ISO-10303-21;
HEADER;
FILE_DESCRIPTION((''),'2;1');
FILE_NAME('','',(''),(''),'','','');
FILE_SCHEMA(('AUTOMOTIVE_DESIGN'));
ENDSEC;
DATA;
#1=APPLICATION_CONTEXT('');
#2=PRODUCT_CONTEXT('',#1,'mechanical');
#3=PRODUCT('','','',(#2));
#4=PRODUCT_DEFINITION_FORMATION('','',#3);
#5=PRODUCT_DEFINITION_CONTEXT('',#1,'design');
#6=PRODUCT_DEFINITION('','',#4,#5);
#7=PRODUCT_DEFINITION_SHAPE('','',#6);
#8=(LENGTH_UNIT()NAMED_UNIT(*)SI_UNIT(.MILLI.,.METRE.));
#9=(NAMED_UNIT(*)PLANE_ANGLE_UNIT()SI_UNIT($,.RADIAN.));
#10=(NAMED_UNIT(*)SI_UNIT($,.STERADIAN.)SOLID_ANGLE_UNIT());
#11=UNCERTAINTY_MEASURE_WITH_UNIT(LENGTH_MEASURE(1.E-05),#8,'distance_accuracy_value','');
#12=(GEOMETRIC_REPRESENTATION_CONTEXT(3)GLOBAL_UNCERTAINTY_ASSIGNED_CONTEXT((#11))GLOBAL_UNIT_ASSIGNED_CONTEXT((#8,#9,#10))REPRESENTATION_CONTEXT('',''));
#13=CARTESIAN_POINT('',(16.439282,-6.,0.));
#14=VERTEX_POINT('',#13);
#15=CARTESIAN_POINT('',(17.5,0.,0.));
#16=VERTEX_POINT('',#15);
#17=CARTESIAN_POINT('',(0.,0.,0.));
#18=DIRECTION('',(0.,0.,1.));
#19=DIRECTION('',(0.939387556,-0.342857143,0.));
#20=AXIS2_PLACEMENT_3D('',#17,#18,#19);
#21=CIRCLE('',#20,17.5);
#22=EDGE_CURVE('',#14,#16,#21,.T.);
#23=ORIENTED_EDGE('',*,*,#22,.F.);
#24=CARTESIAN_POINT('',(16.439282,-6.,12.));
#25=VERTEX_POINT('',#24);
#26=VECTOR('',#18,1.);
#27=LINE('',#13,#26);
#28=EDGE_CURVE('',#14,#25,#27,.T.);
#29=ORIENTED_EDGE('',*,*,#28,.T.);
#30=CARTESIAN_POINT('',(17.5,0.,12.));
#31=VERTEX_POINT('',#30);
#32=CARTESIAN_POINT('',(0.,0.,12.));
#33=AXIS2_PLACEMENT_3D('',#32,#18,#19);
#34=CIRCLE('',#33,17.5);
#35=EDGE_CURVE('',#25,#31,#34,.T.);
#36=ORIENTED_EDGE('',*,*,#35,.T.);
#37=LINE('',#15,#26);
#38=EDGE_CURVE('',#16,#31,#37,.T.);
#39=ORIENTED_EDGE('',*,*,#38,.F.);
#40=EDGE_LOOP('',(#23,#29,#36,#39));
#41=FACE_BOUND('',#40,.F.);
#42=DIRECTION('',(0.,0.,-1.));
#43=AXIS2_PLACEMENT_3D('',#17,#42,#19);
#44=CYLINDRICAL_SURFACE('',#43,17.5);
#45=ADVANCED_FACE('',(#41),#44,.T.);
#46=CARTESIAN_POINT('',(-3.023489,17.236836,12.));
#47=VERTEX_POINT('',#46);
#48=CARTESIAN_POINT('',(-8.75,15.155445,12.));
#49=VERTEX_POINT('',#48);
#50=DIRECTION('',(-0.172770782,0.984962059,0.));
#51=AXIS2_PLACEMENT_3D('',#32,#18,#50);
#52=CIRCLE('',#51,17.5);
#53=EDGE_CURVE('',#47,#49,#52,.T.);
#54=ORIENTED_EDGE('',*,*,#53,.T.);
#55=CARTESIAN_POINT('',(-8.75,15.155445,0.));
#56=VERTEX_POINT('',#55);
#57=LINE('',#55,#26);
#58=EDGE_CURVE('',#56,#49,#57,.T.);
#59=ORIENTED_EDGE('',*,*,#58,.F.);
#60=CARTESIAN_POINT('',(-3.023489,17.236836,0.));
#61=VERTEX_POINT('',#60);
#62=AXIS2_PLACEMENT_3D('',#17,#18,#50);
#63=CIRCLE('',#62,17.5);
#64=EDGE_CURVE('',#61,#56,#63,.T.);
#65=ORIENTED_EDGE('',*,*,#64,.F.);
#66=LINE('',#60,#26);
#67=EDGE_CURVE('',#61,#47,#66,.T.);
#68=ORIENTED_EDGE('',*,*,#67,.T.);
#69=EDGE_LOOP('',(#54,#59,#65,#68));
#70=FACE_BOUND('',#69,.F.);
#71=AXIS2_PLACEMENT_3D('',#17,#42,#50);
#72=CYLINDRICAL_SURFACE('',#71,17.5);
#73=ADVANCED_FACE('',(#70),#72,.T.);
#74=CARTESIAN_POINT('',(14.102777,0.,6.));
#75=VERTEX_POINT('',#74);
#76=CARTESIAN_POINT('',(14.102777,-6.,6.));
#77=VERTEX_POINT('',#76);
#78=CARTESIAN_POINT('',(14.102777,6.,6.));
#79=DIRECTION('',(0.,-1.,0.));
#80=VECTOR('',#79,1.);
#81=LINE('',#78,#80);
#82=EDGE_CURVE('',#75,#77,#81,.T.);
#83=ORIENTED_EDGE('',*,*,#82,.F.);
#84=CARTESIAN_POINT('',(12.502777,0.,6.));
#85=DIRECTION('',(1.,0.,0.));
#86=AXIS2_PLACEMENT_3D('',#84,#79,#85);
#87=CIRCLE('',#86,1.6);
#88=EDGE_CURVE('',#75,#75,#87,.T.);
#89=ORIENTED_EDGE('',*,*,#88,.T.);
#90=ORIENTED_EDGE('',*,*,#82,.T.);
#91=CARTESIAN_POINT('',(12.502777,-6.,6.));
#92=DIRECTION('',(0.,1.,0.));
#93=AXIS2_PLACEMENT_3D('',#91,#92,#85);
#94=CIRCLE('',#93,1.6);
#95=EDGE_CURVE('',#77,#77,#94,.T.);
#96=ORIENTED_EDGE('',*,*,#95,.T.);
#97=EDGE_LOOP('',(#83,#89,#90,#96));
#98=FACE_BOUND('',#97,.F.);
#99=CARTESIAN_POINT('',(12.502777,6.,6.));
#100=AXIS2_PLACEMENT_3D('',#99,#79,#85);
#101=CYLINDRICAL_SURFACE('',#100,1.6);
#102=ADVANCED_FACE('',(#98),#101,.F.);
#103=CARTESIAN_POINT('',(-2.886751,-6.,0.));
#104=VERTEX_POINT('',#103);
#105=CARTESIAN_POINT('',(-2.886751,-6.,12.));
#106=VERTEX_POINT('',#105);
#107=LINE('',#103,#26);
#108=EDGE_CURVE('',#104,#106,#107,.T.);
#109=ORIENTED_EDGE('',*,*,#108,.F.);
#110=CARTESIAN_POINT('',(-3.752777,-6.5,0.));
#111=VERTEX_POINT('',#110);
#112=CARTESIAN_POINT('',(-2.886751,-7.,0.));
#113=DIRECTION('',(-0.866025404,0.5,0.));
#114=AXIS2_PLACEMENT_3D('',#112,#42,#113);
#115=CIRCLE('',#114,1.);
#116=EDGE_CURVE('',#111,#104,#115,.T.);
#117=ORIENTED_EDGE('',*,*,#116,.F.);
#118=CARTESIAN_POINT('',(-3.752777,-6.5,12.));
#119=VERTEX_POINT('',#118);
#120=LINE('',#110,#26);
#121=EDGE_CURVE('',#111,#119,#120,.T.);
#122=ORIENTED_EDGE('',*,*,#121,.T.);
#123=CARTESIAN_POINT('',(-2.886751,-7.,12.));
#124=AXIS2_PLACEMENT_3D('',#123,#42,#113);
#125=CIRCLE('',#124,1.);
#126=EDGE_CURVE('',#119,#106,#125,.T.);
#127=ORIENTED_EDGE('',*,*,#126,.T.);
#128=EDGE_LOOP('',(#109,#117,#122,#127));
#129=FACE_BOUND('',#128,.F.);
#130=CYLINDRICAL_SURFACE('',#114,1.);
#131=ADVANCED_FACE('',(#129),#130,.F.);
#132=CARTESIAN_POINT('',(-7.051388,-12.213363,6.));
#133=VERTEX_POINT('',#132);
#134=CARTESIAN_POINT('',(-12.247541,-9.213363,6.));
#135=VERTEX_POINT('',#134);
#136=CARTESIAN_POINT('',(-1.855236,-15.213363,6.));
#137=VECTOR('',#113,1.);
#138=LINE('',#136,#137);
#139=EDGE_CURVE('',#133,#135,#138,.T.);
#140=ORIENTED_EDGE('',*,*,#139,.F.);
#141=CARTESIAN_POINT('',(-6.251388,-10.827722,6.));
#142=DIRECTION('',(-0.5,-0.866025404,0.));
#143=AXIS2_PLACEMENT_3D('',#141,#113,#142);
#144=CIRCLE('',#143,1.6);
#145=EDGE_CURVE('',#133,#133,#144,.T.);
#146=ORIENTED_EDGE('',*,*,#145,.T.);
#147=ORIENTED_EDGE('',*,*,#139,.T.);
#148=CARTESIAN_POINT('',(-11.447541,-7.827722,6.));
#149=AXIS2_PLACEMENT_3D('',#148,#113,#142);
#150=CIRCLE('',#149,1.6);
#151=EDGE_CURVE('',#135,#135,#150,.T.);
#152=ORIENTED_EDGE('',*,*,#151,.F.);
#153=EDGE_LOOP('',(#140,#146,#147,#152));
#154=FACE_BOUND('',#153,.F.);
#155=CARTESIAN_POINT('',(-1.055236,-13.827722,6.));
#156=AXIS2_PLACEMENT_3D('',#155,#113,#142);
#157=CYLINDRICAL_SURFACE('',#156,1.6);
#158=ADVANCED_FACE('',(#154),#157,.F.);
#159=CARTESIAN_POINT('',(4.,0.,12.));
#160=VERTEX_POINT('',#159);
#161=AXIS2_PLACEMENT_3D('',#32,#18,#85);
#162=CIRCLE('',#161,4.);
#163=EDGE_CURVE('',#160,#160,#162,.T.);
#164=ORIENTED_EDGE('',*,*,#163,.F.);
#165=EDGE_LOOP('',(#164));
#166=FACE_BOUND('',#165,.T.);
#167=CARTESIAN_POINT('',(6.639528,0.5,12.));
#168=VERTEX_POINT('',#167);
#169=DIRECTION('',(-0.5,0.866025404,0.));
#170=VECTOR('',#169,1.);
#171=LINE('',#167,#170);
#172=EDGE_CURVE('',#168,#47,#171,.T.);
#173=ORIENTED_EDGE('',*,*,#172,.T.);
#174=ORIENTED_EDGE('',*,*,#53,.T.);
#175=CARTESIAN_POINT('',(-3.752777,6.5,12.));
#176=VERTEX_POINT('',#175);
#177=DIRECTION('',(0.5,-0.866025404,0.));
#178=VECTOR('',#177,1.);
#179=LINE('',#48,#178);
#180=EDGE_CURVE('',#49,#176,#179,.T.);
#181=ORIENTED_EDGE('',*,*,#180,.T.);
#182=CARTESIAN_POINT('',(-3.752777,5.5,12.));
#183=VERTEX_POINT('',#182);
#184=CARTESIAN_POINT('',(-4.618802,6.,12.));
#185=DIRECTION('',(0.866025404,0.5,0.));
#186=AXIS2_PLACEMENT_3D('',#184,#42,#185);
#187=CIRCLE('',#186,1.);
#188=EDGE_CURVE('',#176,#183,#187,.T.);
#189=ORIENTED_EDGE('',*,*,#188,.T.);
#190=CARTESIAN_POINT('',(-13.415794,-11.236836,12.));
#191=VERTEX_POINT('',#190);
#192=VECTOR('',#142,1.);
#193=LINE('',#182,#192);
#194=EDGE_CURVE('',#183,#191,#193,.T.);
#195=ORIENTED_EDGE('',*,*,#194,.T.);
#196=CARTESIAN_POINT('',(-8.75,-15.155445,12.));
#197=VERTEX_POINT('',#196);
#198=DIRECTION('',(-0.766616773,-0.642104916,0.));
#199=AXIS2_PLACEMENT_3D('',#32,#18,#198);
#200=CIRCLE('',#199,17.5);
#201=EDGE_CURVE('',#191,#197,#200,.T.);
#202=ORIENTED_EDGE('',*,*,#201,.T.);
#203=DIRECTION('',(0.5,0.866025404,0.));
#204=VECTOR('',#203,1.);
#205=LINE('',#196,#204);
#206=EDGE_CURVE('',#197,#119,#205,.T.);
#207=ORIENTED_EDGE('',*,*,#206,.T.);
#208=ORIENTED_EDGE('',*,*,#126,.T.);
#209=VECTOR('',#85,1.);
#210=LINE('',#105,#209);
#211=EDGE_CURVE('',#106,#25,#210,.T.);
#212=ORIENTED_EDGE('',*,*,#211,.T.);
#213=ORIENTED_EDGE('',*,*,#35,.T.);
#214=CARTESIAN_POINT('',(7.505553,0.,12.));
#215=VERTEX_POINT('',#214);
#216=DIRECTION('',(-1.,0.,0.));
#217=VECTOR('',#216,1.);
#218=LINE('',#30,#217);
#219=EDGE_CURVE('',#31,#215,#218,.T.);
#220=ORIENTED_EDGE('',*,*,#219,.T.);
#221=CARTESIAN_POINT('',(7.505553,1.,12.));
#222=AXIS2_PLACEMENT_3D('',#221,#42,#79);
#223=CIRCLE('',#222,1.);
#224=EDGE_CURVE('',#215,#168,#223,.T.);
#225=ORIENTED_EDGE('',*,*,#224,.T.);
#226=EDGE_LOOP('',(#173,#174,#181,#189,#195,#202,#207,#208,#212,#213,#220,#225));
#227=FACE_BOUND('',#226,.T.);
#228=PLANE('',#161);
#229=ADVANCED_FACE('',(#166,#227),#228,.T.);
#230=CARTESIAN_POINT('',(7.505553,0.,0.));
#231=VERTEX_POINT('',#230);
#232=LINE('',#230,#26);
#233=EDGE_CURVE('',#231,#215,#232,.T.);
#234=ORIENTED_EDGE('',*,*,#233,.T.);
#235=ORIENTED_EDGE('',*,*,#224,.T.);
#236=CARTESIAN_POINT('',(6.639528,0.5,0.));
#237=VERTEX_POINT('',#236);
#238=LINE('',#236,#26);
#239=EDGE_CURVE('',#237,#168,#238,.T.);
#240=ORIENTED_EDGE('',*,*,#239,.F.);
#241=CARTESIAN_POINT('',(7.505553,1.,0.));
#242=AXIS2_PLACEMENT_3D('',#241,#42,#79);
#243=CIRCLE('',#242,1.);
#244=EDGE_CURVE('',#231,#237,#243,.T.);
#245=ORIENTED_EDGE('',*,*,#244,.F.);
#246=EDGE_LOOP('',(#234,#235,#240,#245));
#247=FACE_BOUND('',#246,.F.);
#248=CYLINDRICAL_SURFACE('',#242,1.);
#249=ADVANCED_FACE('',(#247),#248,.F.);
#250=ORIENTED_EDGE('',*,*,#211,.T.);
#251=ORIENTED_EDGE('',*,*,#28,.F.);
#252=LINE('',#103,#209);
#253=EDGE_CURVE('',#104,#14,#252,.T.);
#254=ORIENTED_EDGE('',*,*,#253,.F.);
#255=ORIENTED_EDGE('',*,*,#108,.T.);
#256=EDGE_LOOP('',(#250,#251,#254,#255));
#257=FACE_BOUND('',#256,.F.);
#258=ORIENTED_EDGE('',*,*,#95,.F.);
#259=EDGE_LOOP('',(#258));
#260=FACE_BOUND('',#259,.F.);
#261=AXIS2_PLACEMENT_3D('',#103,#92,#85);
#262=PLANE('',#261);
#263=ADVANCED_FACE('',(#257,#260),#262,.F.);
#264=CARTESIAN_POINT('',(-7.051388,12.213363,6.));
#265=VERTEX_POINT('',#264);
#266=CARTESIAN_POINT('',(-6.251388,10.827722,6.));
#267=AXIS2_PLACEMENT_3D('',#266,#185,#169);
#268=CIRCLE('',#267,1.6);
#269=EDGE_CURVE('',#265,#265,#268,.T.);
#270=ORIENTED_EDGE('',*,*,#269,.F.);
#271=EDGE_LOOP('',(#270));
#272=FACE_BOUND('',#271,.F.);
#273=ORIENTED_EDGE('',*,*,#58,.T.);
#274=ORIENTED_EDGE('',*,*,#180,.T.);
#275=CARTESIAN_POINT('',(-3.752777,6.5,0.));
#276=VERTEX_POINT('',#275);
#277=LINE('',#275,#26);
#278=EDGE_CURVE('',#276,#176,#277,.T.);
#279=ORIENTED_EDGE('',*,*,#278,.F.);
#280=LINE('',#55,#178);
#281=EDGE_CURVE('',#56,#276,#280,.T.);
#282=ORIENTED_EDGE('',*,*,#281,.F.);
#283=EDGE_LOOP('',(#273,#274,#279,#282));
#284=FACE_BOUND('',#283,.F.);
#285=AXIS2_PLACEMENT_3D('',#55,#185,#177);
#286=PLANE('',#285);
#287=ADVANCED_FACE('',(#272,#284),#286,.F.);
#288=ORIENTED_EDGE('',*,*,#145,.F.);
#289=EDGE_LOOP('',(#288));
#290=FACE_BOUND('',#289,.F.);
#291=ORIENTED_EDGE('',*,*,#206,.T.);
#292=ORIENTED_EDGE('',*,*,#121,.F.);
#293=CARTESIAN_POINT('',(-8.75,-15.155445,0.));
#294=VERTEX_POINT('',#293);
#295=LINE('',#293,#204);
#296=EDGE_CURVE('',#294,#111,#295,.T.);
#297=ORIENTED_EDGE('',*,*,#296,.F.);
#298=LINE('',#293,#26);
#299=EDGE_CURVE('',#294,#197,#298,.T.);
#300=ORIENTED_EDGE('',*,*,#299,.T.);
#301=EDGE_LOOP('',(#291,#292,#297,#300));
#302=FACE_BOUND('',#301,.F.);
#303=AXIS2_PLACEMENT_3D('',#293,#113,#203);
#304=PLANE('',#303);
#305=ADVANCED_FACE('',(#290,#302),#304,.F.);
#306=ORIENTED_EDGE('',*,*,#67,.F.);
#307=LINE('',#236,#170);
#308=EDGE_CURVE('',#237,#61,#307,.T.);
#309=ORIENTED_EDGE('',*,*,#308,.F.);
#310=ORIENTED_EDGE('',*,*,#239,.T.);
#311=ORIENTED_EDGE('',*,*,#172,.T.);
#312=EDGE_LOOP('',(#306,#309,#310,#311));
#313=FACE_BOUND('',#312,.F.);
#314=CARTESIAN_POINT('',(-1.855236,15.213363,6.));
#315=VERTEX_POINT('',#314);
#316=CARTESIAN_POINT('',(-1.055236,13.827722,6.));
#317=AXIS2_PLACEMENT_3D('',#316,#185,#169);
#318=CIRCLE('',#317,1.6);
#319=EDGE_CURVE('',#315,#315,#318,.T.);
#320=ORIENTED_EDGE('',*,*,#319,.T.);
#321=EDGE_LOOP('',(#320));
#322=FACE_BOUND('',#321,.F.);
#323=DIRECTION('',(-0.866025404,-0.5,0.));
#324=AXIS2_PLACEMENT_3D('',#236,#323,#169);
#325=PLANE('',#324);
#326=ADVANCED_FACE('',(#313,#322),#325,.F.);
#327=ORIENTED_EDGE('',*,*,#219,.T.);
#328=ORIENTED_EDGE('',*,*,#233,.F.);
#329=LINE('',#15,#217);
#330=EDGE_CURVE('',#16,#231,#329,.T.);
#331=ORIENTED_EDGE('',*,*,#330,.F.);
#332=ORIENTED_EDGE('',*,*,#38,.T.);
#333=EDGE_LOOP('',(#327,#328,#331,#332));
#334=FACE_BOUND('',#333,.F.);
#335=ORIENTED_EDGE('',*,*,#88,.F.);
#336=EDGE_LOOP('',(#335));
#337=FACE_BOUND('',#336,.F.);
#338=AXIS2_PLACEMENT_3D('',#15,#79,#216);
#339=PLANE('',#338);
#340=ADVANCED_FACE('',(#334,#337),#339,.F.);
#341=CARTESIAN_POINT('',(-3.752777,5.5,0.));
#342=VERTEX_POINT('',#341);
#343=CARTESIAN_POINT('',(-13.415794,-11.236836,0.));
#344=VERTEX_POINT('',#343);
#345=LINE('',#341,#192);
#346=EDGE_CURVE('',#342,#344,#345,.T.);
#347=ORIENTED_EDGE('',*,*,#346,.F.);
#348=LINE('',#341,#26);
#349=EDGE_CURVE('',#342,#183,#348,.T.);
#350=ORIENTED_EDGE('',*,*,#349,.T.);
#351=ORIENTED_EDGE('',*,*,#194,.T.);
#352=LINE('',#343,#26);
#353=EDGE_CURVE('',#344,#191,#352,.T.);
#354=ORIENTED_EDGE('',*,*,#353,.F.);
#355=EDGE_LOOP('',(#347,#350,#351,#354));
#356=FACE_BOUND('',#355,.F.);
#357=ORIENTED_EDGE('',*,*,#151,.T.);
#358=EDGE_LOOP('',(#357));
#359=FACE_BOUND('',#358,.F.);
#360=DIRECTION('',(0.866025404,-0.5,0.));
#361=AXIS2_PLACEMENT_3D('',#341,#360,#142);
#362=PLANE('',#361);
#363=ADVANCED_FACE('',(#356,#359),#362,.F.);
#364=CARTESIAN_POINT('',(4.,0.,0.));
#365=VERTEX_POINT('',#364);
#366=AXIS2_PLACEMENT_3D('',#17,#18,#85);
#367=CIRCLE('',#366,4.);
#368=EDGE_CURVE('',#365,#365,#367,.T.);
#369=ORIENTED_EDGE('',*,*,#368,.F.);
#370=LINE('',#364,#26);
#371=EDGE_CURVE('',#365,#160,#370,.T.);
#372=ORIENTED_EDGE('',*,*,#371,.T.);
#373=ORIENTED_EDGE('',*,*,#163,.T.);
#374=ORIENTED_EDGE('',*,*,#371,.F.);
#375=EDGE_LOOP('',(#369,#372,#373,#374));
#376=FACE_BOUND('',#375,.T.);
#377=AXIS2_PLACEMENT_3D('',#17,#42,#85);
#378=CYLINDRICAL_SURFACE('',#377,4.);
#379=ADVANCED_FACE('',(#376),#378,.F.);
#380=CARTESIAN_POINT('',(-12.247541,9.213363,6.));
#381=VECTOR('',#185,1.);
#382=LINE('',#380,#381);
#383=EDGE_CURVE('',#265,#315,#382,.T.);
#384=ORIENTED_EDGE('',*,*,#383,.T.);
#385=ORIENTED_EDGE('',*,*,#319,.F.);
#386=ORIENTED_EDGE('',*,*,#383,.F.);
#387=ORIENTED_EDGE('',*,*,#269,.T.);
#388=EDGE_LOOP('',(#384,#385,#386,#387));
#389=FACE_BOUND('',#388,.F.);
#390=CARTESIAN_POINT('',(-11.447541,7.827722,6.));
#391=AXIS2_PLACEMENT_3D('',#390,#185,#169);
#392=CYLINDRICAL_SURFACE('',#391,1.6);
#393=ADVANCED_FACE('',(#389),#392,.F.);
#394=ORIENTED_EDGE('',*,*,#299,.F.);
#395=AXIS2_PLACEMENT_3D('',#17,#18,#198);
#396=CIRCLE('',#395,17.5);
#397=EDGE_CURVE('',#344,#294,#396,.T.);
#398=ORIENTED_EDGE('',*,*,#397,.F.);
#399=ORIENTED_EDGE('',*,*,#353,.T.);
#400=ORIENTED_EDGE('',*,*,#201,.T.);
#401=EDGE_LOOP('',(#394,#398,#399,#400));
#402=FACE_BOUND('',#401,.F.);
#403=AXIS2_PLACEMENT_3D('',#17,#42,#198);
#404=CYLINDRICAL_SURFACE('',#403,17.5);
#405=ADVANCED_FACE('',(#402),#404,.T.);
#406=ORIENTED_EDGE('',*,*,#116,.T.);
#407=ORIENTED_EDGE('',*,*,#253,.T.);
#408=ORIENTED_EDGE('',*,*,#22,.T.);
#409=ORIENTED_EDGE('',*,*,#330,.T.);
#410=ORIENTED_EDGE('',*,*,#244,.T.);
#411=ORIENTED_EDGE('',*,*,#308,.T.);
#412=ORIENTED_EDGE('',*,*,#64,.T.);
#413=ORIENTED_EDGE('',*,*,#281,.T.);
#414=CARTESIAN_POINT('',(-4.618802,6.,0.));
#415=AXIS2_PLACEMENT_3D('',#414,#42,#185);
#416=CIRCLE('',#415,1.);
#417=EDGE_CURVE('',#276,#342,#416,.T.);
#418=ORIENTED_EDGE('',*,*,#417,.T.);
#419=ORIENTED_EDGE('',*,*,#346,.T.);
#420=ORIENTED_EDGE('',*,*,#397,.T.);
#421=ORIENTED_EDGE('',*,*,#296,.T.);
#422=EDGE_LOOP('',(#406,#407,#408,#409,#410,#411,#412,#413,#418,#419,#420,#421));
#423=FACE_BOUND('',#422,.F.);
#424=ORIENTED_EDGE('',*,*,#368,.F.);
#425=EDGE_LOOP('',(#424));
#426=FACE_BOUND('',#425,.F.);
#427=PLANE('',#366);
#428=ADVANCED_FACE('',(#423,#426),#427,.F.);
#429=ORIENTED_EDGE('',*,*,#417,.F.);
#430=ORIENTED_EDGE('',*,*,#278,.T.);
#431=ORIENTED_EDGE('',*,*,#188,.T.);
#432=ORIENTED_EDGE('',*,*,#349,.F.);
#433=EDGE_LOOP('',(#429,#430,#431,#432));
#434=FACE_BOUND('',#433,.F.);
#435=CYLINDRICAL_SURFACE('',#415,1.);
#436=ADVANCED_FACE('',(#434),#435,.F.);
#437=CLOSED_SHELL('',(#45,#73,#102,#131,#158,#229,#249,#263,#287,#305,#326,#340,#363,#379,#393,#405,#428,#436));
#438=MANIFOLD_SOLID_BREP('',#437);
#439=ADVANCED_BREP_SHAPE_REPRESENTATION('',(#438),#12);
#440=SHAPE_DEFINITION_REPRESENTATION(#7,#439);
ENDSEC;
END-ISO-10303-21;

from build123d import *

# Parameters (mm, degrees)
F0_R            = 4
F1_DEPTH        = 12
F3_D            = 3.2
F3_DEPTH        = 6
F3_TIP          = 0.9613769904
F3_COPIES_COUNT = 3


# Not quite as in the source:
# - a pattern or mirror of a feature is missing from the dataset's text; its kind, count and spacing are read off the source's solid


with BuildPart() as f1:
    # F0 (on Top) → F1 (new body)
    with BuildSketch(Plane.XY):
        with BuildLine():
            Line((-2.8867513459, -6), (16.4392822228, -6))
            ThreePointArc((16.4392822228, -6), (17.2327803749, -3.0465194158), (17.5, 0))
            Line((17.5, 0), (7.5055534995, 0))
            ThreePointArc((7.5055534995, 0), (7.0055534995, 0.1339745962), (6.6395280957, 0.5))
            Line((6.6395280957, 0.5), (-3.0234886887, 17.2368360249))
            ThreePointArc((-3.0234886887, 17.2368360249), (-5.9780269803, 16.4472852904), (-8.75, 15.1554445662))
            Line((-8.75, 15.1554445662), (-3.7527767497, 6.5))
            ThreePointArc((-3.7527767497, 6.5), (-3.6188021535, 6), (-3.7527767497, 5.5))
            Line((-3.7527767497, 5.5), (-13.4157935341, -11.2368360249))
            ThreePointArc((-13.4157935341, -11.2368360249), (-11.2547533946, -13.4007658746), (-8.75, -15.1554445662))
            Line((-8.75, -15.1554445662), (-3.7527767497, -6.5))
            ThreePointArc((-3.7527767497, -6.5), (-3.3867513459, -6.1339745962), (-2.8867513459, -6))
        make_face()
        Circle(F0_R, mode=Mode.SUBTRACT)
    extrude(amount=F1_DEPTH)

    # F3
    with Locations(Plane(origin=(0, 0, 0), x_dir=(-1, 0, 0), z_dir=(0, 1, 0))):
        with Locations((-12.5027767497, 6)):
            f3 = Hole(F3_D / 2, depth=F3_DEPTH)
            with Locations((0, 0, -(F3_DEPTH + F3_TIP / 2))):  # 118° drill point
                Cone(0, F3_D / 2, F3_TIP, mode=Mode.SUBTRACT)

    # F3_copies: F3 ×3 about axis
    f3_copies_axis = Axis((0, 0, 0), (0, 0, 1))
    for i in range(1, F3_COPIES_COUNT):
        add(f3.rotate(f3_copies_axis, i * 360 / F3_COPIES_COUNT), mode=Mode.SUBTRACT)


solid = f1.part
